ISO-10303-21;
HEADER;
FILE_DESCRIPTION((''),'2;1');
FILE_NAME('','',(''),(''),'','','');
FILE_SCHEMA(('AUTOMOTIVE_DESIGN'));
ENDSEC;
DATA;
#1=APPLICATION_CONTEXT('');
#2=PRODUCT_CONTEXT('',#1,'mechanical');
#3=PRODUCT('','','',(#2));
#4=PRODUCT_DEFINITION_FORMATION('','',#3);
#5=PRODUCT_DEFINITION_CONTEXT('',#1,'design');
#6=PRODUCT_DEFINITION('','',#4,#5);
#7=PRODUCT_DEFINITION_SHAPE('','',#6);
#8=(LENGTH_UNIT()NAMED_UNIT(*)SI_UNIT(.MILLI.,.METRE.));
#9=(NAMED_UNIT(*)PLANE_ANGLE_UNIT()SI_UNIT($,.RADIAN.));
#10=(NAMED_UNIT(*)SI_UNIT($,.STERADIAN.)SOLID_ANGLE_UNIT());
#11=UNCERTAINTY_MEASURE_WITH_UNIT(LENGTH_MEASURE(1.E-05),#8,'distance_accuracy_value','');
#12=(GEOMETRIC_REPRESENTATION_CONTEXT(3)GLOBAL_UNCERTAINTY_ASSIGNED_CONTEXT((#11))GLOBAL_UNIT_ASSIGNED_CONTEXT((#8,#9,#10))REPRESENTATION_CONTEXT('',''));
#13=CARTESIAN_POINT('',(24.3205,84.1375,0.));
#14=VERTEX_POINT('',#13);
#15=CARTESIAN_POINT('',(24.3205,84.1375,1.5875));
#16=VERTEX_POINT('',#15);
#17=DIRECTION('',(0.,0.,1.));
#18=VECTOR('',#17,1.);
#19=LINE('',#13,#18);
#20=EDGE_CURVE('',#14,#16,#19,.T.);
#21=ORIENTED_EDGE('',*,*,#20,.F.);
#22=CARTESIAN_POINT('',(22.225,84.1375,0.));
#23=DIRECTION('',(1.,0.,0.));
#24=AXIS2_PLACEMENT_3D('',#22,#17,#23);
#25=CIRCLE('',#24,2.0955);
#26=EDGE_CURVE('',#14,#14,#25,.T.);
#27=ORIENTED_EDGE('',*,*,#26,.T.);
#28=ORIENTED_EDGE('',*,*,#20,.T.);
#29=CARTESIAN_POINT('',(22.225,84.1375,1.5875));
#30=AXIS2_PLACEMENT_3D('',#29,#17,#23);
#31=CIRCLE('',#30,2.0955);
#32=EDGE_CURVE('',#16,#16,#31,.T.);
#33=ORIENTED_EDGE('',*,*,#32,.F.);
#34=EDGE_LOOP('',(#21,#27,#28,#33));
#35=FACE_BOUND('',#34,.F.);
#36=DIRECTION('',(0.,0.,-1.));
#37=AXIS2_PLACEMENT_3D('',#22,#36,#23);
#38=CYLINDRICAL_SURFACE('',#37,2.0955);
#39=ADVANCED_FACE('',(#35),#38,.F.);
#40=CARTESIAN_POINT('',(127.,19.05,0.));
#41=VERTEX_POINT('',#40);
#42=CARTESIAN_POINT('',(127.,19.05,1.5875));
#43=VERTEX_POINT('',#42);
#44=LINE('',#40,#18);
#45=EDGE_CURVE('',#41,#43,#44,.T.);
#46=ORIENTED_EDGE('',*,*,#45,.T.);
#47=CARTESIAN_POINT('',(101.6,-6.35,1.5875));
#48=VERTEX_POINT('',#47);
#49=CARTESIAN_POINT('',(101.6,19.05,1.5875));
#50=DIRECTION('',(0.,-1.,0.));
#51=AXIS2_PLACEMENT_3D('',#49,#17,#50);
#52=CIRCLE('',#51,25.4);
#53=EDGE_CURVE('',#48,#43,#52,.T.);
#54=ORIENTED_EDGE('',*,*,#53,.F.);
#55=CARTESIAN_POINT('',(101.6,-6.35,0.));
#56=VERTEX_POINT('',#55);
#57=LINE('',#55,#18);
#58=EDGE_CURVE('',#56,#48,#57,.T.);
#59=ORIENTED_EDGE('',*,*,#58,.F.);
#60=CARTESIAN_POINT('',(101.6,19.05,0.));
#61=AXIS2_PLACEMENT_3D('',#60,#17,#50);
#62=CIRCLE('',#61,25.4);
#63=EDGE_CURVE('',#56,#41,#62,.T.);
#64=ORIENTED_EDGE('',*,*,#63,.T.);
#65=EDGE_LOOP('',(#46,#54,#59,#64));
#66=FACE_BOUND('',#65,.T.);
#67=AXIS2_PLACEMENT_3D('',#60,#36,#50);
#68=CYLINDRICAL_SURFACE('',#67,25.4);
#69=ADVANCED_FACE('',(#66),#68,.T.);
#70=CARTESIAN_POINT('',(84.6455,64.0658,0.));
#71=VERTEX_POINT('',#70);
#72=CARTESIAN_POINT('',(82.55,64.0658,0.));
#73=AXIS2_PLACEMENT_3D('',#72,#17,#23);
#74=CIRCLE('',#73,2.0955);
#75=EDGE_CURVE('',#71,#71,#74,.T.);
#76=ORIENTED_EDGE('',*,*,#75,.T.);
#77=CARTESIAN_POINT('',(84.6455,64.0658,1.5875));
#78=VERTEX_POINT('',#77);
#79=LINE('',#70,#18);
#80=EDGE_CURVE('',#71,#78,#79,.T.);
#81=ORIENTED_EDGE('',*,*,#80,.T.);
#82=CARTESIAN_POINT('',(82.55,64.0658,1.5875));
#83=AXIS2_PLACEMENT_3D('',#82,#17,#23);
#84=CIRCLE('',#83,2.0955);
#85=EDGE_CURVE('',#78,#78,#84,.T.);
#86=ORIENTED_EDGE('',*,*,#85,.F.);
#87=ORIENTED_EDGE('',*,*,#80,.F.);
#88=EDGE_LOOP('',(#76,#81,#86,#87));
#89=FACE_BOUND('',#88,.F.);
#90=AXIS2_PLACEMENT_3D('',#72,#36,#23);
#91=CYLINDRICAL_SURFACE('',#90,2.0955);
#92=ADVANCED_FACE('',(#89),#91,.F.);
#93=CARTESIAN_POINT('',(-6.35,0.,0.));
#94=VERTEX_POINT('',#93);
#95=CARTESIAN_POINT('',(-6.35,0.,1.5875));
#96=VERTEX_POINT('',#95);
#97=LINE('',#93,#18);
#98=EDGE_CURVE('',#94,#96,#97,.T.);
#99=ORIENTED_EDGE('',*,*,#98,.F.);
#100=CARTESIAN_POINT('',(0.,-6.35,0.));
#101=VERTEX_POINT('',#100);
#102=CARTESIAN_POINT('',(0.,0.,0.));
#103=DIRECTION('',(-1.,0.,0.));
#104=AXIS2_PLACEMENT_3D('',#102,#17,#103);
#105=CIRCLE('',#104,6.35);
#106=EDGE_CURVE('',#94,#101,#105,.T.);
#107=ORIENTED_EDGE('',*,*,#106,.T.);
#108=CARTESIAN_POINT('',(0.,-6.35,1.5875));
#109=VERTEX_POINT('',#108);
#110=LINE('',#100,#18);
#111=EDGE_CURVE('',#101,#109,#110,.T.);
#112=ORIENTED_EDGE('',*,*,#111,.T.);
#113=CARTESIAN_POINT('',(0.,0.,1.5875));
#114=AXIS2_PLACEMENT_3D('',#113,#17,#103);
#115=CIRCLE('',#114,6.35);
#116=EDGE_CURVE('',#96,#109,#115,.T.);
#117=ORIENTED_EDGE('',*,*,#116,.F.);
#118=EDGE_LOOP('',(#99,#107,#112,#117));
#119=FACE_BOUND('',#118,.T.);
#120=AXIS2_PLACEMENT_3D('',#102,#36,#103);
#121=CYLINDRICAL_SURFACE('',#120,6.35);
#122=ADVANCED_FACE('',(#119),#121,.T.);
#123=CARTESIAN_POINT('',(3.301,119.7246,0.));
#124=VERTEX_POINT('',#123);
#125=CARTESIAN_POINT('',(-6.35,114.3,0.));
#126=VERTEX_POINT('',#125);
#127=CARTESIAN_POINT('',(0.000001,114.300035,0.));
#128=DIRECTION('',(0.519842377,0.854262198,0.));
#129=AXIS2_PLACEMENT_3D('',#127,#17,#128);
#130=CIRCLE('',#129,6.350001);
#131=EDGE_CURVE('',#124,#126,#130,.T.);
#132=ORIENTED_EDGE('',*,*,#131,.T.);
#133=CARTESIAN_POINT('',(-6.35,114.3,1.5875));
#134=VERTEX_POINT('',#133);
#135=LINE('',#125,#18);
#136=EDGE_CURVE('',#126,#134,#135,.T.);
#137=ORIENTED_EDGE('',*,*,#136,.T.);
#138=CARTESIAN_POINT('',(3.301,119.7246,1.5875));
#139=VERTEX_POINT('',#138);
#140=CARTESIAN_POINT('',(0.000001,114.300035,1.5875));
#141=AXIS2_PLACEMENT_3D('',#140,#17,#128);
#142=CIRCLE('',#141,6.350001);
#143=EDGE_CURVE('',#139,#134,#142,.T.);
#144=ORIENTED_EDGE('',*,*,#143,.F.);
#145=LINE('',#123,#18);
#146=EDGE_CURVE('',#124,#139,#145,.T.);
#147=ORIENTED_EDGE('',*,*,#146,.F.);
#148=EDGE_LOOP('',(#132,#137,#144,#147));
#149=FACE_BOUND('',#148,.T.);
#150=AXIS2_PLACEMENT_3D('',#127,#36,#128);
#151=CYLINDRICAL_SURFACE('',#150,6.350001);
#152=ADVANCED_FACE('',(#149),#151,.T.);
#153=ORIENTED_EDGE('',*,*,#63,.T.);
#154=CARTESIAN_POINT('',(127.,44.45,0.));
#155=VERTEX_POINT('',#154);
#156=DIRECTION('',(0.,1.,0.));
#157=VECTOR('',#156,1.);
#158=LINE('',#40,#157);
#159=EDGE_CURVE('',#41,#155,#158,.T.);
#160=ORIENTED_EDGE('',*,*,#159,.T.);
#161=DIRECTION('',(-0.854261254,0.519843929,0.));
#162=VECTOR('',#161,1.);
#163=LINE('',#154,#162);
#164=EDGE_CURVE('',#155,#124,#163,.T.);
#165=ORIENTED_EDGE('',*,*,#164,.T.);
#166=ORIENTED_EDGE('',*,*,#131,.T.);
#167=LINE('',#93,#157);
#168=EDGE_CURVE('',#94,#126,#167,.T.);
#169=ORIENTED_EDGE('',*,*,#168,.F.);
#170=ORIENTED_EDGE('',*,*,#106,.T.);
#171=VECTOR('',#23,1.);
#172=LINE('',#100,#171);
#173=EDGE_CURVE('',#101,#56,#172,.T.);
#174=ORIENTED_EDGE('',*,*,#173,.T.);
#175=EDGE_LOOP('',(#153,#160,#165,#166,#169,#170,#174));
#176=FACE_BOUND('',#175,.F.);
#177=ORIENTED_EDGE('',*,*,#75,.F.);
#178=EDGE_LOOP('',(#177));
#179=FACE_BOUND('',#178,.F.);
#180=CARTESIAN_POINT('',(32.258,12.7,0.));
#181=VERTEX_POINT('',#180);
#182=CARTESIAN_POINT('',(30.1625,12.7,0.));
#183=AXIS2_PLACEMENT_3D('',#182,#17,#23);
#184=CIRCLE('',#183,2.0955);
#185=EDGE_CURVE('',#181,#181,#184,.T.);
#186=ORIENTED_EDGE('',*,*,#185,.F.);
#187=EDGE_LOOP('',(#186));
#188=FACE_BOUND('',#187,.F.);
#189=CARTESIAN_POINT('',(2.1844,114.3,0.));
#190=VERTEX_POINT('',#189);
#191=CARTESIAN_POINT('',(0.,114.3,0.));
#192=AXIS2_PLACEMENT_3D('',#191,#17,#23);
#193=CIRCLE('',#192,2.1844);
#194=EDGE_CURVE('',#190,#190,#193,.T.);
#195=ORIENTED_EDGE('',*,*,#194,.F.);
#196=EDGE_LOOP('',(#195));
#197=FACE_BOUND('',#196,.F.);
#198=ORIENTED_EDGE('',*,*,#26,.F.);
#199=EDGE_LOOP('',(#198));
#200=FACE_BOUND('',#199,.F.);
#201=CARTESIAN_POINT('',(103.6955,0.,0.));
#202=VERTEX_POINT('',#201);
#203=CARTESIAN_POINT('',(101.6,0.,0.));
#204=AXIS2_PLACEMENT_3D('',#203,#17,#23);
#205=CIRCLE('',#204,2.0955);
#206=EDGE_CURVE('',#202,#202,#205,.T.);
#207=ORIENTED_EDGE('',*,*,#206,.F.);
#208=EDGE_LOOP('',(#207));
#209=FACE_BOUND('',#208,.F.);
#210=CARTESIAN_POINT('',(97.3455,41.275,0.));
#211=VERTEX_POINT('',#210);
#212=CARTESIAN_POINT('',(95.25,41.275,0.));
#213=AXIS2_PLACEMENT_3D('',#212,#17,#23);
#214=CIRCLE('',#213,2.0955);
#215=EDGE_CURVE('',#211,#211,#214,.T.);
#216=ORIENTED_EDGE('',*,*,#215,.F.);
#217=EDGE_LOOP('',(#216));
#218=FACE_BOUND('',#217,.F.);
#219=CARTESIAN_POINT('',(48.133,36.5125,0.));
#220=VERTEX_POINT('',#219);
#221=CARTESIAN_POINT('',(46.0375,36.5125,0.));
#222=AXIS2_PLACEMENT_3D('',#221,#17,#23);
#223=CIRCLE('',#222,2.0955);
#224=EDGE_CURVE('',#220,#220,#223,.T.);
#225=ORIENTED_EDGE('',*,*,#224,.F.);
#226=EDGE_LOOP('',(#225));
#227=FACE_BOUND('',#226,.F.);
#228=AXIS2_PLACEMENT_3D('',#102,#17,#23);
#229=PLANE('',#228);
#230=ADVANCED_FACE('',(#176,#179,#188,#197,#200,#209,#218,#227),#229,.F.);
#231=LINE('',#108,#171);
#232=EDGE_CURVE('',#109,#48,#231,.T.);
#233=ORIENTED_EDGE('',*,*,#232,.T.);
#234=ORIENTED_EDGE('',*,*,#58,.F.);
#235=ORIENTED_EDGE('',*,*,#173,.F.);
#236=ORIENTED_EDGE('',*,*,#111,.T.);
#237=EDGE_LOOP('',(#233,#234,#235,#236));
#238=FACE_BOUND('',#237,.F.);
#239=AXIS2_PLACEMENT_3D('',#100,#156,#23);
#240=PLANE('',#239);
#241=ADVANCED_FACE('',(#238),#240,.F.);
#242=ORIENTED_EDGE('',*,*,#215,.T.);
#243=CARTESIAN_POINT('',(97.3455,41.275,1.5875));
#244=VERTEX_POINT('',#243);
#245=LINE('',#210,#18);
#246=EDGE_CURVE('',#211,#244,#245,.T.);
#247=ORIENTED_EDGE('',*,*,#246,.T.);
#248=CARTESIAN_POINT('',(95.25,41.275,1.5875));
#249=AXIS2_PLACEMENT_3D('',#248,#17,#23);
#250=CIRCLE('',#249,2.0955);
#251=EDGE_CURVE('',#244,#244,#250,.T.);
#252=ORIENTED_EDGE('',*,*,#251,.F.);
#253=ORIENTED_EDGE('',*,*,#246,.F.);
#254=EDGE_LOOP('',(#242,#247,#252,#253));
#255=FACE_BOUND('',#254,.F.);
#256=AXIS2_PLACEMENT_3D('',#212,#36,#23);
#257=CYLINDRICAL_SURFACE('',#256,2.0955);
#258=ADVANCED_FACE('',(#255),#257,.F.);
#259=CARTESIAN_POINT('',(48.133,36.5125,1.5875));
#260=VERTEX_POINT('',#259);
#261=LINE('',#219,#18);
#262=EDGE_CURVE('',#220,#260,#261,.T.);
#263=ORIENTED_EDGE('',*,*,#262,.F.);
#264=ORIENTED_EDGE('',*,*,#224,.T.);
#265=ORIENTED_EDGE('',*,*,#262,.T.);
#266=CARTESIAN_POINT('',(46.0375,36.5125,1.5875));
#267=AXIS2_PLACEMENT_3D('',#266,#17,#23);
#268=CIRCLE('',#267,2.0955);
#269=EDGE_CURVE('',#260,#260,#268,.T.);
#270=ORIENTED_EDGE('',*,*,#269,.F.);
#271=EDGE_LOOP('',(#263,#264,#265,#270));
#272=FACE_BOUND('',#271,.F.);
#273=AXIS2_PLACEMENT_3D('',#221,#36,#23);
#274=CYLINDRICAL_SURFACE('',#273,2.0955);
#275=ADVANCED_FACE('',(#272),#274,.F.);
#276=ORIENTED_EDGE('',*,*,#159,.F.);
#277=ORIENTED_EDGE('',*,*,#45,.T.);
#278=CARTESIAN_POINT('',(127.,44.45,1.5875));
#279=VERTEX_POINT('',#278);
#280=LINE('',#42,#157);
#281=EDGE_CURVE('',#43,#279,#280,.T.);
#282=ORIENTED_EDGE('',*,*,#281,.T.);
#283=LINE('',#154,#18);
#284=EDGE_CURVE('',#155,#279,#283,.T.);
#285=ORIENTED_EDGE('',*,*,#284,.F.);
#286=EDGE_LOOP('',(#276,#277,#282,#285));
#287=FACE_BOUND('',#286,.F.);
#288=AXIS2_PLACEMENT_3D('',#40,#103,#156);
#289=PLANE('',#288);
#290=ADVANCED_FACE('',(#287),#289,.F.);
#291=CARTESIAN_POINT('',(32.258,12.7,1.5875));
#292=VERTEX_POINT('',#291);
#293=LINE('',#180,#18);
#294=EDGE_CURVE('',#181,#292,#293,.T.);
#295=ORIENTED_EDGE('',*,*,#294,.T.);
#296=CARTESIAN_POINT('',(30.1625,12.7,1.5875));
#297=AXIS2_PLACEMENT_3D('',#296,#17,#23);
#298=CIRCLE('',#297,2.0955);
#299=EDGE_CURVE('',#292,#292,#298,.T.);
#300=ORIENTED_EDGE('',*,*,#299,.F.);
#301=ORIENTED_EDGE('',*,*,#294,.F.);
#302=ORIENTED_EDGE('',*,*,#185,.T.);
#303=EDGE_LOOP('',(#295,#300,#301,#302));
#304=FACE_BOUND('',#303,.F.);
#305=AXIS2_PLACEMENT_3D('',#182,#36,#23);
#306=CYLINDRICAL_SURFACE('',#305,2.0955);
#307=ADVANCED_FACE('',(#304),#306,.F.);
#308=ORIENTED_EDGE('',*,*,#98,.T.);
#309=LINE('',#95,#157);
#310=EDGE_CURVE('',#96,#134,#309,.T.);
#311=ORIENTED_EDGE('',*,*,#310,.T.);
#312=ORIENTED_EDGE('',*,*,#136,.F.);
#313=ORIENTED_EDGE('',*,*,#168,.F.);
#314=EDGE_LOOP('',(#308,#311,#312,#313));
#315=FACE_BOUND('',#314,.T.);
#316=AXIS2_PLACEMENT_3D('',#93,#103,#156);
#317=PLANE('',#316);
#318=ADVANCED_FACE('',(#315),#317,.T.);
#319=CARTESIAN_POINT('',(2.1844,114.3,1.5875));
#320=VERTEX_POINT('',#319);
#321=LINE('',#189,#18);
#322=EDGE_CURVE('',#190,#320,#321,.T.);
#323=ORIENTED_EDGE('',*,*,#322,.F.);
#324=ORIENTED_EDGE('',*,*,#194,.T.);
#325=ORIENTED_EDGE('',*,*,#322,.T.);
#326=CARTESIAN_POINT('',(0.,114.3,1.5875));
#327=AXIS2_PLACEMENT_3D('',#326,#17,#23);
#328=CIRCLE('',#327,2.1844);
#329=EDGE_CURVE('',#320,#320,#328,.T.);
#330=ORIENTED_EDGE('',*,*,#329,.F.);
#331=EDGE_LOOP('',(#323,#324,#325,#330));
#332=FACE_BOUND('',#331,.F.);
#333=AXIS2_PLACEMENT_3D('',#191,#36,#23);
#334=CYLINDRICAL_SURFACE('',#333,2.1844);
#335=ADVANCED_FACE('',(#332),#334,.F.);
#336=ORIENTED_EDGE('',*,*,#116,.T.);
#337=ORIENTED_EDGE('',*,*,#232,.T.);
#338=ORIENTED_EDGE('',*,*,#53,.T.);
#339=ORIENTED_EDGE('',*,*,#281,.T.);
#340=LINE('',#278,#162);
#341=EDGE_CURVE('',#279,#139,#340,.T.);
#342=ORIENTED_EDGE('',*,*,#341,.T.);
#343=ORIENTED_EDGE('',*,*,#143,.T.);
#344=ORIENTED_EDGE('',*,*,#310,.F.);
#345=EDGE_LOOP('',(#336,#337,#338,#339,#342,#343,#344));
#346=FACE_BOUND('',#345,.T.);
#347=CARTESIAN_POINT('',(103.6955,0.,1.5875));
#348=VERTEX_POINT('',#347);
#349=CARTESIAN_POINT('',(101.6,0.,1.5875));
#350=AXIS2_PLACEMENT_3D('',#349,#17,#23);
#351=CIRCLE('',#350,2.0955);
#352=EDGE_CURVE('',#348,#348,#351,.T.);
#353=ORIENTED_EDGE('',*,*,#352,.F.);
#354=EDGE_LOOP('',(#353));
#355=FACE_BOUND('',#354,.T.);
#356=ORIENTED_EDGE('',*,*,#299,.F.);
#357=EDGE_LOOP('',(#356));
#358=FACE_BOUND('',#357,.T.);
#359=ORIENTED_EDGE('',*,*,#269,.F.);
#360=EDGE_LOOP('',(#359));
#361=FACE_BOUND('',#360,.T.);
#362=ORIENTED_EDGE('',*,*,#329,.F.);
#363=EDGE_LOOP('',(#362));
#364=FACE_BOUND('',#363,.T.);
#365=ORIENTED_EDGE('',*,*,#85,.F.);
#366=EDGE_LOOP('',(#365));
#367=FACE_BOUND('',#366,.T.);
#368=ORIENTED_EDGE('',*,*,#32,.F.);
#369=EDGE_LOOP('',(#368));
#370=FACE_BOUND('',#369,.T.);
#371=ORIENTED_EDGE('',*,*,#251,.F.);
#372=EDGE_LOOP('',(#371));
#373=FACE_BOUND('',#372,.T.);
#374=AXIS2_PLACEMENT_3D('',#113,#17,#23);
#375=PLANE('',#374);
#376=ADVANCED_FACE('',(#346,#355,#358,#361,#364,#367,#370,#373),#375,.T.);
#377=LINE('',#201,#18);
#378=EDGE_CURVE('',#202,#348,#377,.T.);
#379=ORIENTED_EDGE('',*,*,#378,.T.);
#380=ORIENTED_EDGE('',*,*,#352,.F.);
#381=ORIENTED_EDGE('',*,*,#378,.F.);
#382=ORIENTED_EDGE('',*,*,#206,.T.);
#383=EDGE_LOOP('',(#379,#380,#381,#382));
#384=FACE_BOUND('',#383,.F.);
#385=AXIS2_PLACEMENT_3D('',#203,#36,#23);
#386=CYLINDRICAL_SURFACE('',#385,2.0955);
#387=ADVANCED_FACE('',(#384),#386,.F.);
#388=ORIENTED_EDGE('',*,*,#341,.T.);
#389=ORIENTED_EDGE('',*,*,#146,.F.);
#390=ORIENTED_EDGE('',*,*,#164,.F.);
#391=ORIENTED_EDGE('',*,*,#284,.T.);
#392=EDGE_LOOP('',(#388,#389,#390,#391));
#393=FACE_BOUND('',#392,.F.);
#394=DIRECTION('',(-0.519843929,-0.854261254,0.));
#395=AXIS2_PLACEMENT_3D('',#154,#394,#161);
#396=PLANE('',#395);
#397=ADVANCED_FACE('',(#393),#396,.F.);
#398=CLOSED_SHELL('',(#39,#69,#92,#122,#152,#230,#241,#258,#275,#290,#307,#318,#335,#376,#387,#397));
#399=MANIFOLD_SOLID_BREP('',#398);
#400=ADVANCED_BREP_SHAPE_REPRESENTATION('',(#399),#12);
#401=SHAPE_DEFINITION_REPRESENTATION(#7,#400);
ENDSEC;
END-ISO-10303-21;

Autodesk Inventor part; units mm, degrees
ref_plane "YZ Plane" through (0, 0, 0) normal (1, 0, 0) x (0, 1, 0)
ref_plane "XZ Plane" through (0, 0, 0) normal (0, 1, 0) x (-1, 0, 0)
ref_plane "XY Plane" through (0, 0, 0) normal (0, 0, 1) x (1, 0, 0)
sketch "Block1" plane through (0, 0, 0) normal (0, 0, 1) x (1, 0, 0)
  circle A0 centre (36.7608, -51.6694) radius 2.0955
  circle A1 centre (30.4108, -10.3944) radius 2.0955
  circle A2 centre (17.7108, 12.3965) radius 2.0955
  circle A3 centre (-18.8017, -15.1569) radius 2.0955
  circle A4 centre (-34.6767, -38.9694) radius 2.0955
  line L0 (-64.8392, -58.0194) -> (36.7608, -58.0194)
  line L1 (62.1608, -7.2194) -> (-61.5382, 68.0552)
  circle A5 centre (-42.6142, 32.4681) radius 2.0955
  circle A6 centre (-64.8392, 62.6306) radius 2.1844
  arc A7 (-61.5382, 68.0552) -> (-71.1892, 62.6306) centre (-64.8392, 62.6306) ccw
  line L2 (-71.1892, -51.6694) -> (-71.1892, 62.6306)
  arc A8 (-71.1892, -51.6694) -> (-64.8392, -58.0194) centre (-64.8392, -51.6694) ccw
  line L3 (62.1608, -32.6194) -> (62.1608, -7.2194)
  arc A9 (36.7608, -58.0194) -> (62.1608, -32.6194) centre (36.7608, -32.6194) ccw
  point P0 (-13.0925, -13.6067)
  point P1 (62.1608, -58.0194)
  dimension "d0" = 12.7
  dimension "d1" = 12.7
  dimension "d2" = 50.8
  dimension "d3" = 25.4
  dimension "d4" = 4.191
  dimension "d5" = 4.191
  dimension "d6" = 4.191
  dimension "d7" = 4.191
  dimension "d8" = 4.191
  dimension "d9" = 4.191
sketch "main" plane through (0, 0, 0) normal (0, 0, 1) x (1, 0, 0)
  circle A0 centre (36.7608, -51.6694) radius 2.0955
  circle A1 centre (30.4108, -10.3944) radius 2.0955
  circle A2 centre (17.7108, 12.3965) radius 2.0955
  circle A3 centre (-18.8017, -15.1569) radius 2.0955
  circle A4 centre (-34.6767, -38.9694) radius 2.0955
  line L0 (-64.8392, -58.0194) -> (36.7608, -58.0194)
  line L1 (62.1608, -7.2194) -> (-61.5382, 68.0552)
  circle A5 centre (-42.6142, 32.4681) radius 2.0955
  circle A6 centre (-64.8392, 62.6306) radius 2.1844
  arc A7 (-61.5382, 68.0552) -> (-71.1892, 62.6306) centre (-64.8392, 62.6306) ccw
  line L2 (-71.1892, -51.6694) -> (-71.1892, 62.6306)
  arc A8 (-71.1892, -51.6694) -> (-64.8392, -58.0194) centre (-64.8392, -51.6694) ccw
  line L3 (62.1608, -32.6194) -> (62.1608, -7.2194)
  arc A9 (36.7608, -58.0194) -> (62.1608, -32.6194) centre (36.7608, -32.6194) ccw
  point P0 (-13.0925, -13.6067)
sketch "Sketch1" plane through (0, 0, 0) normal (0, 0, 1) x (1, 0, 0)
  circle A0 centre (12.7, 0) radius 2.0955
  circle A1 centre (101.6, 0) radius 2.0955
  circle A2 centre (95.25, 41.275) radius 2.0955
  circle A3 centre (82.55, 64.0658) radius 2.0955
  circle A4 centre (46.0375, 36.5125) radius 2.0955
  circle A5 centre (30.1625, 12.7) radius 2.0955
  line L0 (0, -6.35) -> (101.6, -6.35)
  line L1 (127, 44.45) -> (3.301, 119.7246)
  circle A6 centre (22.225, 84.1375) radius 2.0955
  circle A7 centre (0, 114.3) radius 2.1844
  arc A8 (3.301, 119.7246) -> (-6.35, 114.3) centre (0, 114.3) ccw
  line L2 (-6.35, 0) -> (-6.35, 114.3)
  arc A9 (-6.35, 0) -> (0, -6.35) centre (0, 0) ccw
  line L3 (127, 19.05) -> (127, 44.45)
  arc A10 (101.6, -6.35) -> (127, 19.05) centre (101.6, 19.05) ccw
  dimension "d12" = 4.191
extrude "Extrusion1" add sketch "Sketch1" along normal blind 1.5875 contours A0 | A9 L2 A8 L1 L3 A10 L0
equation "\"BendRadius\" = Thickness"
equation "\"BendReliefWidth\" = Thickness"
equation "\"BendReliefDepth\" = 0.5 * Thickness"
equation "\"CornerReliefSize\" = 4 * Thickness"
equation "\"MinimumRemnant\" = 2 * Thickness"
equation "\"TransitionRadius\" = BendRadius"
equation "\"JacobiRadiusSize\" = BendRadius"
equation "\"GapSize\" = Thickness"
equation "\"Thickness\" = 1.5875"
properties part number "blocker" material "Acetal Resin, White"
